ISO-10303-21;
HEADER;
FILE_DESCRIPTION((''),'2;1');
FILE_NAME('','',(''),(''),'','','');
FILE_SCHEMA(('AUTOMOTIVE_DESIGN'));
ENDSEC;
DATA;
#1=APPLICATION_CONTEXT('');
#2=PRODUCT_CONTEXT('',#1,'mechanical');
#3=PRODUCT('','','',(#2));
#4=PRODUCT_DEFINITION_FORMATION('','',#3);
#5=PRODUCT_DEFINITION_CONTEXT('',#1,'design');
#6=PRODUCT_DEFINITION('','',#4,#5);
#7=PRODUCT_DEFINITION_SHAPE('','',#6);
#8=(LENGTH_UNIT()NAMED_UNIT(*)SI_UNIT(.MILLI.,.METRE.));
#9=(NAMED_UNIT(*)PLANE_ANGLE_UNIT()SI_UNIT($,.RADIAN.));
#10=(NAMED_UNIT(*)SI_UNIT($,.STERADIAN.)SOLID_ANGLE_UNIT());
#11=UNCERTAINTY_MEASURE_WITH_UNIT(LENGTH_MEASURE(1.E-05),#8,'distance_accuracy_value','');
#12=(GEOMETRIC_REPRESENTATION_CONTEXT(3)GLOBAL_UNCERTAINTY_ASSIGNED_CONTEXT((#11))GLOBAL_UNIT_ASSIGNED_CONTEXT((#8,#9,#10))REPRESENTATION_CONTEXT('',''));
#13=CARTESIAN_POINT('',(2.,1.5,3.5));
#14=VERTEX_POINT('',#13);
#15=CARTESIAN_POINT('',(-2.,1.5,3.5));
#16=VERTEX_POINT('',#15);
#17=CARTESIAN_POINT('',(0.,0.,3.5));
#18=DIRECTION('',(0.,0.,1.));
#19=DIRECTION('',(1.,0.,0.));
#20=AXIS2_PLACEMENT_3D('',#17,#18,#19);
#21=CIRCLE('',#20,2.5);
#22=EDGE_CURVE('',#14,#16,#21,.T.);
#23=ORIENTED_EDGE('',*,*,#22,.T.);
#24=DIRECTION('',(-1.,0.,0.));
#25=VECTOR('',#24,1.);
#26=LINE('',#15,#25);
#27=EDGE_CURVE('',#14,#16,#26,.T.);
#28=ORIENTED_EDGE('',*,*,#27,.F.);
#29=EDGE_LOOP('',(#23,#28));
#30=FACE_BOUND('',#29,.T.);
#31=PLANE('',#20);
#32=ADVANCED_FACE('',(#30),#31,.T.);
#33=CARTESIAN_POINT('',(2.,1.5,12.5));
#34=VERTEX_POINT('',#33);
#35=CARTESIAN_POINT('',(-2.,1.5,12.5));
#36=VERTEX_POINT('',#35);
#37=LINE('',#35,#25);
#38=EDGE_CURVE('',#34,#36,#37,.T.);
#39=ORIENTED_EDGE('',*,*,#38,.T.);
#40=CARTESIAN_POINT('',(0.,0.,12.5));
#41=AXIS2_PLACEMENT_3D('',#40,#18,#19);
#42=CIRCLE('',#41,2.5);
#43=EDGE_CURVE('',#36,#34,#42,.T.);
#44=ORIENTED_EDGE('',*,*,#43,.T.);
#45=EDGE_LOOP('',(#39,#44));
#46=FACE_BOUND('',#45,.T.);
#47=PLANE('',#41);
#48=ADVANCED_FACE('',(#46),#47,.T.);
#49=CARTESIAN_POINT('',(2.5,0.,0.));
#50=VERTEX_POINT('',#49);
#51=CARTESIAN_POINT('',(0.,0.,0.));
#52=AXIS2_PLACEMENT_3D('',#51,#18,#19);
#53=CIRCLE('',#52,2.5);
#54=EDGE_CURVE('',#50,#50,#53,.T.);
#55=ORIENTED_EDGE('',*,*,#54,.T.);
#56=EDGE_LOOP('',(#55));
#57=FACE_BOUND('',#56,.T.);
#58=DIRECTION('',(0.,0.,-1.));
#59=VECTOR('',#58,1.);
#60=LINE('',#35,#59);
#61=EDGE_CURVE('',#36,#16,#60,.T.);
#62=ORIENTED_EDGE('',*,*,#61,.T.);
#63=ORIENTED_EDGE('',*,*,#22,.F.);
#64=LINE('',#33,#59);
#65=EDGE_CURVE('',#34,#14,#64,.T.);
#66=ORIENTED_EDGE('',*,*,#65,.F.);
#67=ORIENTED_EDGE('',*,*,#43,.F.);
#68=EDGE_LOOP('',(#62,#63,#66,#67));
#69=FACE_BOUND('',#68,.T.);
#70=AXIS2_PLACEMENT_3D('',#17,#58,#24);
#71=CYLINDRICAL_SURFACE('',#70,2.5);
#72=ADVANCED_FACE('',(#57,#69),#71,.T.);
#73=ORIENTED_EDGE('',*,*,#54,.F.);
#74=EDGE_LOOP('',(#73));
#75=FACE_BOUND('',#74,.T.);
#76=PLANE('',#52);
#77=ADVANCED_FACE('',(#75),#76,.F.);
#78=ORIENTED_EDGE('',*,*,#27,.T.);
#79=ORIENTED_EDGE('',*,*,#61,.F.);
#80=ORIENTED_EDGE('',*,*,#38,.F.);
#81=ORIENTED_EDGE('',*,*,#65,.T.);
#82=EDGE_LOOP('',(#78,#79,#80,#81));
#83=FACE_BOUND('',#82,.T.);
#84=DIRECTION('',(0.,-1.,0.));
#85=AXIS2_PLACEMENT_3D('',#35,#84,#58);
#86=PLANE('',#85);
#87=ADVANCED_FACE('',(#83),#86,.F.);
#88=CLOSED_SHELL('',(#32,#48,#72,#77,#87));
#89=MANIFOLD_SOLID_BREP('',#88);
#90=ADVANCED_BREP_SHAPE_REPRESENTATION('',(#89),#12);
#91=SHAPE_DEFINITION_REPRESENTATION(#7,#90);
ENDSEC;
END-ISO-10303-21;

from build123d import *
from build123d.topology import SkipClean

# Parameters (mm, degrees)
SKETCH1_R           = 2.5
BOSS_EXTRUDE2_DEPTH = 3.5
BOSS_EXTRUDE3_DEPTH = 9


with BuildPart() as part:
    # Sketch1 → Boss-Extrude2 (new body)
    with BuildSketch(Plane.XY):
        Circle(SKETCH1_R)
    extrude(amount=BOSS_EXTRUDE2_DEPTH)

    # Sketch3 → Boss-Extrude3 (add)
    with SkipClean():  # the faces are left unmerged after this step: merging them gives an invalid solid
        with BuildSketch(Plane.XY.offset(3.5)):
            with BuildLine():
                Line((-2, 1.5), (2, 1.5))
                ThreePointArc((2, 1.5), (0, -2.5), (-2, 1.5))
            make_face()
        extrude(amount=BOSS_EXTRUDE3_DEPTH)
    add(part.part.scale(1), mode=Mode.REPLACE)  # the faces are merged on a copy


solid = part.part
